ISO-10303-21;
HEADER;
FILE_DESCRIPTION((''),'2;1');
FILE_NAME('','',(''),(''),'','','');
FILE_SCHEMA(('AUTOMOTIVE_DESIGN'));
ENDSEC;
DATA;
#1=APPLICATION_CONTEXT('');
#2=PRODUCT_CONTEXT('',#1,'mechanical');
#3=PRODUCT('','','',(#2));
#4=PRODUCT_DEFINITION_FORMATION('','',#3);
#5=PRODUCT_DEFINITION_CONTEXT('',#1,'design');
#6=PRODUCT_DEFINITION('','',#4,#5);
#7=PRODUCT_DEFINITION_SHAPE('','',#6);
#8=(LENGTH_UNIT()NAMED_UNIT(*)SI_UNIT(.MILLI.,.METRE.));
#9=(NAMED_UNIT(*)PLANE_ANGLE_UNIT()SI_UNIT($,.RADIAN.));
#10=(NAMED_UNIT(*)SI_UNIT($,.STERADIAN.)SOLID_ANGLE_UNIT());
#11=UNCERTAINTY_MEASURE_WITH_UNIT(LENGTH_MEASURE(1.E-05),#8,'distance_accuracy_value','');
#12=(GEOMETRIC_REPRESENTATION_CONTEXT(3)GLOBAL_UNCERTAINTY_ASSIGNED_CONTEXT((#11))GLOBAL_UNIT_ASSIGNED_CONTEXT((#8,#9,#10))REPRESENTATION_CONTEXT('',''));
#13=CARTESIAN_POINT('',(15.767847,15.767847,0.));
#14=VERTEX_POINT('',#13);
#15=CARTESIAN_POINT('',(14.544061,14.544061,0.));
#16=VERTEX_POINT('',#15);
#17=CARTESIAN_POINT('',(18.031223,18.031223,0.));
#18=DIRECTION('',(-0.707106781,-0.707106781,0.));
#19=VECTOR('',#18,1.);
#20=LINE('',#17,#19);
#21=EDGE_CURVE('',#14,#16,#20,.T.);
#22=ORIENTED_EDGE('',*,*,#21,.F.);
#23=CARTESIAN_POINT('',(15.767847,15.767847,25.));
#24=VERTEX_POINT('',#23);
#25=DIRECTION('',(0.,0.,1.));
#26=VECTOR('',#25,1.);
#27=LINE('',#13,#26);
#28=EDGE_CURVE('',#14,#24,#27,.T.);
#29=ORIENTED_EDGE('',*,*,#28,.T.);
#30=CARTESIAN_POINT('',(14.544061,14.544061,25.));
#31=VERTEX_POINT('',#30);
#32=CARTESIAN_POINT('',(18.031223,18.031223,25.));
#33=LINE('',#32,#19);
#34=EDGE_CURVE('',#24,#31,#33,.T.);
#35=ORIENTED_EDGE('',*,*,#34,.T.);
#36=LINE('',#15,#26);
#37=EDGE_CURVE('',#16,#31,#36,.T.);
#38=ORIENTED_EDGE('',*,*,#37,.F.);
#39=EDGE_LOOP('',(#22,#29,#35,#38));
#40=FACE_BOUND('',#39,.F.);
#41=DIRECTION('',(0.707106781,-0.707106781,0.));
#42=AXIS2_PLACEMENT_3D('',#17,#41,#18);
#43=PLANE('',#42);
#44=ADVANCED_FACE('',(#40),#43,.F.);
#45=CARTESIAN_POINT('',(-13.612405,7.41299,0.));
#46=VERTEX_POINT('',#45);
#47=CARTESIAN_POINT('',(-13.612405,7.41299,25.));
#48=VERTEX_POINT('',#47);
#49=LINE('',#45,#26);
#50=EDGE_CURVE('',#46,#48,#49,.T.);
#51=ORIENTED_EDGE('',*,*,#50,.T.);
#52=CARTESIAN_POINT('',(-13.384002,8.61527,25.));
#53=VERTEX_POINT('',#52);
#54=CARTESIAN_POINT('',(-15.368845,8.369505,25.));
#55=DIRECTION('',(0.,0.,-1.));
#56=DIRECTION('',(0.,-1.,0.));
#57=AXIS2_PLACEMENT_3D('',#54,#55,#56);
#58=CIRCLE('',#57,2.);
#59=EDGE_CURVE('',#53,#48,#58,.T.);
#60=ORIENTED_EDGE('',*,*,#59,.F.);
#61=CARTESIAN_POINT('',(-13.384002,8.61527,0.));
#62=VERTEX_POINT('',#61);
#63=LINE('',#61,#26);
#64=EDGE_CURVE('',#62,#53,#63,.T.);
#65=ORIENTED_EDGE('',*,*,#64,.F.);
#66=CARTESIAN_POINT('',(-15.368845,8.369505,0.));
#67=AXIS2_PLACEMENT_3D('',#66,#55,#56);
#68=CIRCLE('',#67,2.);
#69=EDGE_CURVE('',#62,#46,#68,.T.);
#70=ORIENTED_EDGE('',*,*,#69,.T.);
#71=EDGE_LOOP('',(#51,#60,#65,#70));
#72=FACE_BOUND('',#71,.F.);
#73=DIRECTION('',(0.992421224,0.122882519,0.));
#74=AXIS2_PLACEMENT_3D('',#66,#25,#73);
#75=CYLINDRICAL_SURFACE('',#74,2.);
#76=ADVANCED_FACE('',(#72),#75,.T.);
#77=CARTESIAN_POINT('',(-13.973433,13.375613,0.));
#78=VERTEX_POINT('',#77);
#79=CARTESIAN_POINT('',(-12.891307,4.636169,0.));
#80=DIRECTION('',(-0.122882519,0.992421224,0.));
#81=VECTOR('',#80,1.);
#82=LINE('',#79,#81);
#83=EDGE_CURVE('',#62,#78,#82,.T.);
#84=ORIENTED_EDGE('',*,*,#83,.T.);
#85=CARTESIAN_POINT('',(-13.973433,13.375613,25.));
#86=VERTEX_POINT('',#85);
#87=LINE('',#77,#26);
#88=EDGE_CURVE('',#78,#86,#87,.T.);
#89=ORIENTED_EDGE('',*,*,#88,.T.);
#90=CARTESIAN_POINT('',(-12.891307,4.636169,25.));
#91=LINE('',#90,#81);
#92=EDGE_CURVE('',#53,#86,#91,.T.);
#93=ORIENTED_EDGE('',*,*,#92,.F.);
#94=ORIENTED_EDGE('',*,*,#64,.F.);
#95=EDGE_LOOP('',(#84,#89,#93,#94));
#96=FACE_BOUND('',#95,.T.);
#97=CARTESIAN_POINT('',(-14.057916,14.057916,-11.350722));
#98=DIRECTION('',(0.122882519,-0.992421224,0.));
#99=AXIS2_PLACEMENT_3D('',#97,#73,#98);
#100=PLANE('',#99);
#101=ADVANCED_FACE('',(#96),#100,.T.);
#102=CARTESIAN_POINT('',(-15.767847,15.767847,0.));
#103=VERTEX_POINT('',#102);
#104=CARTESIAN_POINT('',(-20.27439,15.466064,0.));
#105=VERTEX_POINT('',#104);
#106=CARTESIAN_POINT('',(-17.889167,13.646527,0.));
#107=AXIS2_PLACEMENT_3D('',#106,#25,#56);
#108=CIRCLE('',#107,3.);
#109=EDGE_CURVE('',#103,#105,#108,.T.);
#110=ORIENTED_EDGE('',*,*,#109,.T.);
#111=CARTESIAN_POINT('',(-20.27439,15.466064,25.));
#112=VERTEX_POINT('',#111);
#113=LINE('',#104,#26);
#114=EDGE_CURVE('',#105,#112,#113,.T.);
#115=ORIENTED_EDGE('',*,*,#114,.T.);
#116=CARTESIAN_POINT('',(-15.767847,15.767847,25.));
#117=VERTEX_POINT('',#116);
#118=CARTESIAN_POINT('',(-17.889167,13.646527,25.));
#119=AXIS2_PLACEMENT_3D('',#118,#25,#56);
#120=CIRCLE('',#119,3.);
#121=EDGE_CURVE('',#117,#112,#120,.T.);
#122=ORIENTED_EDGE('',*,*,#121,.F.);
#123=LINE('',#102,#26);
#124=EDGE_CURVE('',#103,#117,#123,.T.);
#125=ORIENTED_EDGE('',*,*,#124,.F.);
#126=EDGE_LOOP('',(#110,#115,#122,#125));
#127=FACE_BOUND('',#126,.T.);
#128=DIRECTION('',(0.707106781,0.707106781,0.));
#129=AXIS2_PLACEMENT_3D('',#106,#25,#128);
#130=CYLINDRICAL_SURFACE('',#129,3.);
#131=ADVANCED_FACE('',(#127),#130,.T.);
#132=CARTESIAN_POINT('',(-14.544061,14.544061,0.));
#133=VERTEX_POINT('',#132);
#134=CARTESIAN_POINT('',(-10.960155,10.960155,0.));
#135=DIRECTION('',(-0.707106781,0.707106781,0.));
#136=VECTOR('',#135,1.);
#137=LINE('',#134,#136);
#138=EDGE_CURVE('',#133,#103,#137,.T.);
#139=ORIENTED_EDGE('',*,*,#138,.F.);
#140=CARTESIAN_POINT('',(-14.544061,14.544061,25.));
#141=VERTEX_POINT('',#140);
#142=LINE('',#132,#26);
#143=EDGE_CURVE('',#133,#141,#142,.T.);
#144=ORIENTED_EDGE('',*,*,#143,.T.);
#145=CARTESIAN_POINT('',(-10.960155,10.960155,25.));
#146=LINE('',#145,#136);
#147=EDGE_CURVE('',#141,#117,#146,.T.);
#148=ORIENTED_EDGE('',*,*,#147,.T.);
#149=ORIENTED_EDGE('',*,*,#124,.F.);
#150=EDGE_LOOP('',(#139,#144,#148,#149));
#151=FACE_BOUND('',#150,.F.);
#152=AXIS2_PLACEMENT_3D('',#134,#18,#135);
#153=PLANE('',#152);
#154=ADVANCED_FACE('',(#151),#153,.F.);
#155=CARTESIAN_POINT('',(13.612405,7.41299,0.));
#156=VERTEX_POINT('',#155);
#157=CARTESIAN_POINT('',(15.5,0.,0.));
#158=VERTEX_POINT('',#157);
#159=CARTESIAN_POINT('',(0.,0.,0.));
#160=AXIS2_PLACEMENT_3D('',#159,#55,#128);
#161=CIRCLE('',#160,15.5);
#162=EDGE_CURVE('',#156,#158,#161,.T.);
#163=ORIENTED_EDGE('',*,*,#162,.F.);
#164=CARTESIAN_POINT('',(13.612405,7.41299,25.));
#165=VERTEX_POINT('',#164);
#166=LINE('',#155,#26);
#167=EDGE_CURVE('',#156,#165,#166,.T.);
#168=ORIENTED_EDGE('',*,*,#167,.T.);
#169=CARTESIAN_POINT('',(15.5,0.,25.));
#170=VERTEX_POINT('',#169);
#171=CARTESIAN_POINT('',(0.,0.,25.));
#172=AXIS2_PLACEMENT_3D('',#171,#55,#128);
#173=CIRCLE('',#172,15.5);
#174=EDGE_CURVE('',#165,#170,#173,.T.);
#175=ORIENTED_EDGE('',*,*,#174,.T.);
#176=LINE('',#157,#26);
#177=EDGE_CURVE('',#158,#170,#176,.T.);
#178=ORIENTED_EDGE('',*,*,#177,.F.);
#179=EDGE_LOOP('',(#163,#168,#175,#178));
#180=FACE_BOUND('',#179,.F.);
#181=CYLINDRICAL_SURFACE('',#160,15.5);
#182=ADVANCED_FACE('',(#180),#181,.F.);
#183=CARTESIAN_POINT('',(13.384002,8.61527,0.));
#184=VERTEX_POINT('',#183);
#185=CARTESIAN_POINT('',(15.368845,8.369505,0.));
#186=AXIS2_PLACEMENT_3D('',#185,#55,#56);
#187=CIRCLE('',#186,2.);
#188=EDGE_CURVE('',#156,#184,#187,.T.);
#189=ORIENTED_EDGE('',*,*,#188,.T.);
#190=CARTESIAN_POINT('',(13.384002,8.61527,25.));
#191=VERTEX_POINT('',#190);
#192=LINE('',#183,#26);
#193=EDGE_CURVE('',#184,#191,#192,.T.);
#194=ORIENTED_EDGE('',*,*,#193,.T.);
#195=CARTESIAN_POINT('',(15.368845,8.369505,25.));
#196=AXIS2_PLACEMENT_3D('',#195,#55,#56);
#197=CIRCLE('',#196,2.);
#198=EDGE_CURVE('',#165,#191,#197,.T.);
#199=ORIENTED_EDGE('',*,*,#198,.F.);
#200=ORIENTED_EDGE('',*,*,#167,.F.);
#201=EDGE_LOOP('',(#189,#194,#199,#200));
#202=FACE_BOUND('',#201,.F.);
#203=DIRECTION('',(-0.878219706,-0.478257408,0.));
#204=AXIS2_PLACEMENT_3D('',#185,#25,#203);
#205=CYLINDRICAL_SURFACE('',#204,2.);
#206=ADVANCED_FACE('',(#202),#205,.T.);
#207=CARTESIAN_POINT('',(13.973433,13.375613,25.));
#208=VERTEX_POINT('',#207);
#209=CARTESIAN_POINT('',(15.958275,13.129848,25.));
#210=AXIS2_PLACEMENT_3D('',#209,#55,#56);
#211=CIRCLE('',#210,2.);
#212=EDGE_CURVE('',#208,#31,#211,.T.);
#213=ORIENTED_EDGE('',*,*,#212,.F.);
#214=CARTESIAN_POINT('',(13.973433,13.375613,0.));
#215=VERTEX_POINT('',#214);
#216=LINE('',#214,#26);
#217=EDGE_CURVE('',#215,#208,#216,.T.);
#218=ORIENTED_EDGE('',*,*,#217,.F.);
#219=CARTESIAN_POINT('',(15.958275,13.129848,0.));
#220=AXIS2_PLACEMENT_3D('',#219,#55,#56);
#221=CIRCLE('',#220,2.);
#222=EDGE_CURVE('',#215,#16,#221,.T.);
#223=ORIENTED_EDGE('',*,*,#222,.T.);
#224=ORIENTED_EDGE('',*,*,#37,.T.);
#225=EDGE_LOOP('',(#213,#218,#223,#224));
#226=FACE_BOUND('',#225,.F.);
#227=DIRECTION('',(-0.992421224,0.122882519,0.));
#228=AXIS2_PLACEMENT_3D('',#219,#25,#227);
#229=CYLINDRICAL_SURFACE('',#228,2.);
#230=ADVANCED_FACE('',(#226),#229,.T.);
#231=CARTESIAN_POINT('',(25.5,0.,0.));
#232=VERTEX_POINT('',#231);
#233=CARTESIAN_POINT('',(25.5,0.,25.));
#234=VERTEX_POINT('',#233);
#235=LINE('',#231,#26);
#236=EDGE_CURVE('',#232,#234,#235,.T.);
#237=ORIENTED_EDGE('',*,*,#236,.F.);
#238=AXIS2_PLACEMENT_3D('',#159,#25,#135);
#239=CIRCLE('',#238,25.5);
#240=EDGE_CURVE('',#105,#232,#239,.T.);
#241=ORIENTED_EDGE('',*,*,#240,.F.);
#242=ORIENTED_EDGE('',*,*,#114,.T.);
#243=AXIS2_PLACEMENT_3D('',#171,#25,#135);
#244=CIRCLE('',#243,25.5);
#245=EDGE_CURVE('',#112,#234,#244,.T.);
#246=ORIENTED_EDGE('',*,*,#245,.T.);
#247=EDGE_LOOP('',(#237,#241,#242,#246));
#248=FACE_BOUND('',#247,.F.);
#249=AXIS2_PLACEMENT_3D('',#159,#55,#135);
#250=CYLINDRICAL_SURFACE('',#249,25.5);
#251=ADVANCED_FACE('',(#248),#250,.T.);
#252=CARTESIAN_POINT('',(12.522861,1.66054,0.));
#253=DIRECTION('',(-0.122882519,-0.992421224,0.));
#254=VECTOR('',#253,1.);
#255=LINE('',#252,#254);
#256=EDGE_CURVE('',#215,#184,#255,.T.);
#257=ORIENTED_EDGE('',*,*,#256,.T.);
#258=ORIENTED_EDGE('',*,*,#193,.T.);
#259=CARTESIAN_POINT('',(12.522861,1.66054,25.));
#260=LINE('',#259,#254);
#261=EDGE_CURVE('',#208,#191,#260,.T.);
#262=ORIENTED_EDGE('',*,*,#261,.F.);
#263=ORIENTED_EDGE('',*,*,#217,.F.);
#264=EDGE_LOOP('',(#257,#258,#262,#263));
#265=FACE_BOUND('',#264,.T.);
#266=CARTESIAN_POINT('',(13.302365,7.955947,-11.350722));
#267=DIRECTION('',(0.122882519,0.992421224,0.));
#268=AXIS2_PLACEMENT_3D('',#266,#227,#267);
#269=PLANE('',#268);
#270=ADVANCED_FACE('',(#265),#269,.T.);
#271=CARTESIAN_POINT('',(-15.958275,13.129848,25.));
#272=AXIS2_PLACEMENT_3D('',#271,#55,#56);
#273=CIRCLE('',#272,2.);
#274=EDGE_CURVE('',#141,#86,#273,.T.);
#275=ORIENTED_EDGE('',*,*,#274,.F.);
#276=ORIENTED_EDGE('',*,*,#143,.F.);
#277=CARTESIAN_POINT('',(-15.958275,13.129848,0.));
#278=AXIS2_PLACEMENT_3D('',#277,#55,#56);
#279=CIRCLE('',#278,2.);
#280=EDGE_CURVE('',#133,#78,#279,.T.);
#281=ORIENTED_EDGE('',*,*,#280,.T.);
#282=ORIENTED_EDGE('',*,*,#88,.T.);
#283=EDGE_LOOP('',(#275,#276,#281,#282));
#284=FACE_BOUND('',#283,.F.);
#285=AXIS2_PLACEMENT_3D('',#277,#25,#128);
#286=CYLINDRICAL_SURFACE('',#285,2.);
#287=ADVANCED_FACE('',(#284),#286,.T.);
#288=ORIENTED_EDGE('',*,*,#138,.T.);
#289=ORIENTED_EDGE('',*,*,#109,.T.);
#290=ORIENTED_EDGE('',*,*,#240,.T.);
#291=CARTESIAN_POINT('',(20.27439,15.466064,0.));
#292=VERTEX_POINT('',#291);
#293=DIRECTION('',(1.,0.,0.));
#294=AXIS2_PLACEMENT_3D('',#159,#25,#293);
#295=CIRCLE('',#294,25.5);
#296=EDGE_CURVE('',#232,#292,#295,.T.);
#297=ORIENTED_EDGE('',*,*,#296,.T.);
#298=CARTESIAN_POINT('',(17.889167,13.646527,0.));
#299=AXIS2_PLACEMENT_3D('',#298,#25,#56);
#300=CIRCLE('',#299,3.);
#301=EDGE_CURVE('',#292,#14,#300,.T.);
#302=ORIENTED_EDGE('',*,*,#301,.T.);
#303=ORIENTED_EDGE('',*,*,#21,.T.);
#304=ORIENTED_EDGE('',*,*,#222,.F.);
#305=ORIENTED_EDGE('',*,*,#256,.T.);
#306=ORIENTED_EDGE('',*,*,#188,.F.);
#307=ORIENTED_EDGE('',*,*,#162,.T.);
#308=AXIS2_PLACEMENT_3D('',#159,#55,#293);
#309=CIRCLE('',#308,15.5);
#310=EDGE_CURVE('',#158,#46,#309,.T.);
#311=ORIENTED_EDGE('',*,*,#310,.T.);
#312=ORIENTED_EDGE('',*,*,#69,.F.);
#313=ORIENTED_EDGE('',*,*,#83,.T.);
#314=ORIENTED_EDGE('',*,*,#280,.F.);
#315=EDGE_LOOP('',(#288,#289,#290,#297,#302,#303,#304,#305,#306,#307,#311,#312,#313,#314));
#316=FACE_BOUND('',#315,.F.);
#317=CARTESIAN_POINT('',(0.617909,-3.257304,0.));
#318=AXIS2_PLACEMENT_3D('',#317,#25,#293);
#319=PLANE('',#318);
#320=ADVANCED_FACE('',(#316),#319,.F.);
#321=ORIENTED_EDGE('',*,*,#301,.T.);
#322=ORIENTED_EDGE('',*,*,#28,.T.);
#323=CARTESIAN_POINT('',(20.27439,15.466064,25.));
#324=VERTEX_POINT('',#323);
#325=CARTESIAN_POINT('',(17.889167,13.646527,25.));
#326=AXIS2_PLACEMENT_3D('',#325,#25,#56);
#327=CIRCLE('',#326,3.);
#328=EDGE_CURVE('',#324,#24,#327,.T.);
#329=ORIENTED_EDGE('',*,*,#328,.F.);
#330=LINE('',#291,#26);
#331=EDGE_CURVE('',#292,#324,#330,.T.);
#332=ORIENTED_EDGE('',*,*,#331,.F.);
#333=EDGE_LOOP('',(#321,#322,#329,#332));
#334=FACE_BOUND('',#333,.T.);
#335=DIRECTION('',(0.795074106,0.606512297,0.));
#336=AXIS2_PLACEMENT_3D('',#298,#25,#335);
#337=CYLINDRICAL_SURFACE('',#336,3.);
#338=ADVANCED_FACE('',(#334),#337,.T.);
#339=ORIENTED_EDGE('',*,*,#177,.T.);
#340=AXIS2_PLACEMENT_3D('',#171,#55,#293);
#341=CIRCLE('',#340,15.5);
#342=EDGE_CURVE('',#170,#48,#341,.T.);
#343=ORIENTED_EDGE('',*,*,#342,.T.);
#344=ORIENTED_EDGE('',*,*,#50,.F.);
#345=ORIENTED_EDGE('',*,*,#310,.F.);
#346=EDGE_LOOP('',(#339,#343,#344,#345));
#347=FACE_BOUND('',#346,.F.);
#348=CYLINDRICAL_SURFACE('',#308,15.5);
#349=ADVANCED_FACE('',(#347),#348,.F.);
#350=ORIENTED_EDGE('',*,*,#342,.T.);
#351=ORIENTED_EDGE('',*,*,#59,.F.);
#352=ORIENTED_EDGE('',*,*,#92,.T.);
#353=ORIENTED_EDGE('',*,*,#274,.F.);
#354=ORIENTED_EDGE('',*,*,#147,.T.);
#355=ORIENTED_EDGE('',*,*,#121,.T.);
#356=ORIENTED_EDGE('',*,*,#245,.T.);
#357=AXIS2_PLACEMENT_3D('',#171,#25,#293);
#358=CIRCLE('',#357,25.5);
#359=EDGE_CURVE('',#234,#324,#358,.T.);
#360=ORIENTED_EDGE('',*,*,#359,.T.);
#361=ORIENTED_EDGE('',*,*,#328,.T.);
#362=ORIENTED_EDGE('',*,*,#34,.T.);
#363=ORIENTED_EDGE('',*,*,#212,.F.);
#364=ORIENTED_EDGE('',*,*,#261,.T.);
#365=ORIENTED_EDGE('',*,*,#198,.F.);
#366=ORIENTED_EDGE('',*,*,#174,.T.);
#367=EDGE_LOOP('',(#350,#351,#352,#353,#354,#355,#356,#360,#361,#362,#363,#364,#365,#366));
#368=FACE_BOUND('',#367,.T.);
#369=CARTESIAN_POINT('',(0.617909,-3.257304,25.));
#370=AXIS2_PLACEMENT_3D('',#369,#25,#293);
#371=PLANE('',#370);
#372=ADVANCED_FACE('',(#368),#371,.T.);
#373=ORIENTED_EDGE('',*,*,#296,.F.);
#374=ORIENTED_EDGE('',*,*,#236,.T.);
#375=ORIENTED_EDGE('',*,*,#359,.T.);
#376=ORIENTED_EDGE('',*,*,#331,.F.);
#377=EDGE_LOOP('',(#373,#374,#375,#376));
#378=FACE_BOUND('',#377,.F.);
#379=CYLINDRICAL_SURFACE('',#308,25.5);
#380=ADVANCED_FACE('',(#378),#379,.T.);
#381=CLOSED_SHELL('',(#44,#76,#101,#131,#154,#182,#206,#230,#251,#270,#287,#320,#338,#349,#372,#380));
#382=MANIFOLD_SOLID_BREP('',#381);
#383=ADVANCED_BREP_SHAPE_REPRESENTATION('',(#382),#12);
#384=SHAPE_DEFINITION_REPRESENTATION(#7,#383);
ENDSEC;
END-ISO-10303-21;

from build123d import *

# Parameters (mm, degrees)
F1_DEPTH    = 25
F2_R        = 3
F3_T1_DEPTH = 47.7014436638
F4_R        = 2


# Not quite as in the source:
# - a fillet or chamfer that OpenCascade refuses, or shapes differently, is made with other operations: its cross-section is extruded or revolved along the edge and cut away or added


with BuildPart() as f1:
    # F0 (on Top) → F1 (new body)
    with BuildSketch(Plane.XY):
        with BuildLine():
            ThreePointArc((10.9601551084, 10.9601551084), (14.3201327539, 5.9315932017), (15.5, 0))
            ThreePointArc((15.5, 0), (-5.9315932017, -14.3201327539), (-10.9601551084, 10.9601551084))
            Line((-10.9601551084, 10.9601551084), (-18.0312229203, 18.0312229203))
            ThreePointArc((-18.0312229203, 18.0312229203), (-9.7584275253, -23.558928079), (25.5, 0))
            ThreePointArc((25.5, 0), (23.558928079, 9.7584275253), (18.0312229203, 18.0312229203))
            Line((18.0312229203, 18.0312229203), (10.9601551084, 10.9601551084))
        make_face()
    extrude(amount=F1_DEPTH)

    # F2
    f2_edges = [f1.edges().sort_by_distance(p)[0] for p in [
        (-18.031223, 18.031223, 12.5),
        (18.031223, 18.031223, 12.5),
    ]]
    fillet(f2_edges, radius=F2_R)

    # F3: chamfer of 5 on 2 edges, made by hand

    # F3_s2 → F3_t1 (cut)
    with BuildSketch(Plane.XY.offset(-11.3507218319)):
        with BuildLine():
            Line((-14.0579159195, 14.0579159195), (-13.3023645022, 7.9559473761))
            ThreePointArc((-13.3023645022, 7.9559473761), (-12.2677824681, 9.4737275301), (-10.9601551084, 10.9601551084))
            Line((-10.9601551084, 10.9601551084), (-14.0579159195, 14.0579159195))
        make_face()
        with BuildLine():
            Line((13.3023645022, 7.9559473761), (14.0579159195, 14.0579159195))
            Line((14.0579159195, 14.0579159195), (10.9601551084, 10.9601551084))
            ThreePointArc((10.9601551084, 10.9601551084), (12.2677824681, 9.4737275301), (13.3023645022, 7.9559473761))
        make_face()
    extrude(amount=F3_T1_DEPTH, mode=Mode.SUBTRACT)

    # F4
    f4_edges = [f1.edges().sort_by_distance(p)[0] for p in [
        (-13.302365, 7.955947, 12.5),
        (-14.057916, 14.057916, 12.5),
        (13.302365, 7.955947, 12.5),
        (14.057916, 14.057916, 12.5),
    ]]
    fillet(f4_edges, radius=F4_R)


solid = f1.part
